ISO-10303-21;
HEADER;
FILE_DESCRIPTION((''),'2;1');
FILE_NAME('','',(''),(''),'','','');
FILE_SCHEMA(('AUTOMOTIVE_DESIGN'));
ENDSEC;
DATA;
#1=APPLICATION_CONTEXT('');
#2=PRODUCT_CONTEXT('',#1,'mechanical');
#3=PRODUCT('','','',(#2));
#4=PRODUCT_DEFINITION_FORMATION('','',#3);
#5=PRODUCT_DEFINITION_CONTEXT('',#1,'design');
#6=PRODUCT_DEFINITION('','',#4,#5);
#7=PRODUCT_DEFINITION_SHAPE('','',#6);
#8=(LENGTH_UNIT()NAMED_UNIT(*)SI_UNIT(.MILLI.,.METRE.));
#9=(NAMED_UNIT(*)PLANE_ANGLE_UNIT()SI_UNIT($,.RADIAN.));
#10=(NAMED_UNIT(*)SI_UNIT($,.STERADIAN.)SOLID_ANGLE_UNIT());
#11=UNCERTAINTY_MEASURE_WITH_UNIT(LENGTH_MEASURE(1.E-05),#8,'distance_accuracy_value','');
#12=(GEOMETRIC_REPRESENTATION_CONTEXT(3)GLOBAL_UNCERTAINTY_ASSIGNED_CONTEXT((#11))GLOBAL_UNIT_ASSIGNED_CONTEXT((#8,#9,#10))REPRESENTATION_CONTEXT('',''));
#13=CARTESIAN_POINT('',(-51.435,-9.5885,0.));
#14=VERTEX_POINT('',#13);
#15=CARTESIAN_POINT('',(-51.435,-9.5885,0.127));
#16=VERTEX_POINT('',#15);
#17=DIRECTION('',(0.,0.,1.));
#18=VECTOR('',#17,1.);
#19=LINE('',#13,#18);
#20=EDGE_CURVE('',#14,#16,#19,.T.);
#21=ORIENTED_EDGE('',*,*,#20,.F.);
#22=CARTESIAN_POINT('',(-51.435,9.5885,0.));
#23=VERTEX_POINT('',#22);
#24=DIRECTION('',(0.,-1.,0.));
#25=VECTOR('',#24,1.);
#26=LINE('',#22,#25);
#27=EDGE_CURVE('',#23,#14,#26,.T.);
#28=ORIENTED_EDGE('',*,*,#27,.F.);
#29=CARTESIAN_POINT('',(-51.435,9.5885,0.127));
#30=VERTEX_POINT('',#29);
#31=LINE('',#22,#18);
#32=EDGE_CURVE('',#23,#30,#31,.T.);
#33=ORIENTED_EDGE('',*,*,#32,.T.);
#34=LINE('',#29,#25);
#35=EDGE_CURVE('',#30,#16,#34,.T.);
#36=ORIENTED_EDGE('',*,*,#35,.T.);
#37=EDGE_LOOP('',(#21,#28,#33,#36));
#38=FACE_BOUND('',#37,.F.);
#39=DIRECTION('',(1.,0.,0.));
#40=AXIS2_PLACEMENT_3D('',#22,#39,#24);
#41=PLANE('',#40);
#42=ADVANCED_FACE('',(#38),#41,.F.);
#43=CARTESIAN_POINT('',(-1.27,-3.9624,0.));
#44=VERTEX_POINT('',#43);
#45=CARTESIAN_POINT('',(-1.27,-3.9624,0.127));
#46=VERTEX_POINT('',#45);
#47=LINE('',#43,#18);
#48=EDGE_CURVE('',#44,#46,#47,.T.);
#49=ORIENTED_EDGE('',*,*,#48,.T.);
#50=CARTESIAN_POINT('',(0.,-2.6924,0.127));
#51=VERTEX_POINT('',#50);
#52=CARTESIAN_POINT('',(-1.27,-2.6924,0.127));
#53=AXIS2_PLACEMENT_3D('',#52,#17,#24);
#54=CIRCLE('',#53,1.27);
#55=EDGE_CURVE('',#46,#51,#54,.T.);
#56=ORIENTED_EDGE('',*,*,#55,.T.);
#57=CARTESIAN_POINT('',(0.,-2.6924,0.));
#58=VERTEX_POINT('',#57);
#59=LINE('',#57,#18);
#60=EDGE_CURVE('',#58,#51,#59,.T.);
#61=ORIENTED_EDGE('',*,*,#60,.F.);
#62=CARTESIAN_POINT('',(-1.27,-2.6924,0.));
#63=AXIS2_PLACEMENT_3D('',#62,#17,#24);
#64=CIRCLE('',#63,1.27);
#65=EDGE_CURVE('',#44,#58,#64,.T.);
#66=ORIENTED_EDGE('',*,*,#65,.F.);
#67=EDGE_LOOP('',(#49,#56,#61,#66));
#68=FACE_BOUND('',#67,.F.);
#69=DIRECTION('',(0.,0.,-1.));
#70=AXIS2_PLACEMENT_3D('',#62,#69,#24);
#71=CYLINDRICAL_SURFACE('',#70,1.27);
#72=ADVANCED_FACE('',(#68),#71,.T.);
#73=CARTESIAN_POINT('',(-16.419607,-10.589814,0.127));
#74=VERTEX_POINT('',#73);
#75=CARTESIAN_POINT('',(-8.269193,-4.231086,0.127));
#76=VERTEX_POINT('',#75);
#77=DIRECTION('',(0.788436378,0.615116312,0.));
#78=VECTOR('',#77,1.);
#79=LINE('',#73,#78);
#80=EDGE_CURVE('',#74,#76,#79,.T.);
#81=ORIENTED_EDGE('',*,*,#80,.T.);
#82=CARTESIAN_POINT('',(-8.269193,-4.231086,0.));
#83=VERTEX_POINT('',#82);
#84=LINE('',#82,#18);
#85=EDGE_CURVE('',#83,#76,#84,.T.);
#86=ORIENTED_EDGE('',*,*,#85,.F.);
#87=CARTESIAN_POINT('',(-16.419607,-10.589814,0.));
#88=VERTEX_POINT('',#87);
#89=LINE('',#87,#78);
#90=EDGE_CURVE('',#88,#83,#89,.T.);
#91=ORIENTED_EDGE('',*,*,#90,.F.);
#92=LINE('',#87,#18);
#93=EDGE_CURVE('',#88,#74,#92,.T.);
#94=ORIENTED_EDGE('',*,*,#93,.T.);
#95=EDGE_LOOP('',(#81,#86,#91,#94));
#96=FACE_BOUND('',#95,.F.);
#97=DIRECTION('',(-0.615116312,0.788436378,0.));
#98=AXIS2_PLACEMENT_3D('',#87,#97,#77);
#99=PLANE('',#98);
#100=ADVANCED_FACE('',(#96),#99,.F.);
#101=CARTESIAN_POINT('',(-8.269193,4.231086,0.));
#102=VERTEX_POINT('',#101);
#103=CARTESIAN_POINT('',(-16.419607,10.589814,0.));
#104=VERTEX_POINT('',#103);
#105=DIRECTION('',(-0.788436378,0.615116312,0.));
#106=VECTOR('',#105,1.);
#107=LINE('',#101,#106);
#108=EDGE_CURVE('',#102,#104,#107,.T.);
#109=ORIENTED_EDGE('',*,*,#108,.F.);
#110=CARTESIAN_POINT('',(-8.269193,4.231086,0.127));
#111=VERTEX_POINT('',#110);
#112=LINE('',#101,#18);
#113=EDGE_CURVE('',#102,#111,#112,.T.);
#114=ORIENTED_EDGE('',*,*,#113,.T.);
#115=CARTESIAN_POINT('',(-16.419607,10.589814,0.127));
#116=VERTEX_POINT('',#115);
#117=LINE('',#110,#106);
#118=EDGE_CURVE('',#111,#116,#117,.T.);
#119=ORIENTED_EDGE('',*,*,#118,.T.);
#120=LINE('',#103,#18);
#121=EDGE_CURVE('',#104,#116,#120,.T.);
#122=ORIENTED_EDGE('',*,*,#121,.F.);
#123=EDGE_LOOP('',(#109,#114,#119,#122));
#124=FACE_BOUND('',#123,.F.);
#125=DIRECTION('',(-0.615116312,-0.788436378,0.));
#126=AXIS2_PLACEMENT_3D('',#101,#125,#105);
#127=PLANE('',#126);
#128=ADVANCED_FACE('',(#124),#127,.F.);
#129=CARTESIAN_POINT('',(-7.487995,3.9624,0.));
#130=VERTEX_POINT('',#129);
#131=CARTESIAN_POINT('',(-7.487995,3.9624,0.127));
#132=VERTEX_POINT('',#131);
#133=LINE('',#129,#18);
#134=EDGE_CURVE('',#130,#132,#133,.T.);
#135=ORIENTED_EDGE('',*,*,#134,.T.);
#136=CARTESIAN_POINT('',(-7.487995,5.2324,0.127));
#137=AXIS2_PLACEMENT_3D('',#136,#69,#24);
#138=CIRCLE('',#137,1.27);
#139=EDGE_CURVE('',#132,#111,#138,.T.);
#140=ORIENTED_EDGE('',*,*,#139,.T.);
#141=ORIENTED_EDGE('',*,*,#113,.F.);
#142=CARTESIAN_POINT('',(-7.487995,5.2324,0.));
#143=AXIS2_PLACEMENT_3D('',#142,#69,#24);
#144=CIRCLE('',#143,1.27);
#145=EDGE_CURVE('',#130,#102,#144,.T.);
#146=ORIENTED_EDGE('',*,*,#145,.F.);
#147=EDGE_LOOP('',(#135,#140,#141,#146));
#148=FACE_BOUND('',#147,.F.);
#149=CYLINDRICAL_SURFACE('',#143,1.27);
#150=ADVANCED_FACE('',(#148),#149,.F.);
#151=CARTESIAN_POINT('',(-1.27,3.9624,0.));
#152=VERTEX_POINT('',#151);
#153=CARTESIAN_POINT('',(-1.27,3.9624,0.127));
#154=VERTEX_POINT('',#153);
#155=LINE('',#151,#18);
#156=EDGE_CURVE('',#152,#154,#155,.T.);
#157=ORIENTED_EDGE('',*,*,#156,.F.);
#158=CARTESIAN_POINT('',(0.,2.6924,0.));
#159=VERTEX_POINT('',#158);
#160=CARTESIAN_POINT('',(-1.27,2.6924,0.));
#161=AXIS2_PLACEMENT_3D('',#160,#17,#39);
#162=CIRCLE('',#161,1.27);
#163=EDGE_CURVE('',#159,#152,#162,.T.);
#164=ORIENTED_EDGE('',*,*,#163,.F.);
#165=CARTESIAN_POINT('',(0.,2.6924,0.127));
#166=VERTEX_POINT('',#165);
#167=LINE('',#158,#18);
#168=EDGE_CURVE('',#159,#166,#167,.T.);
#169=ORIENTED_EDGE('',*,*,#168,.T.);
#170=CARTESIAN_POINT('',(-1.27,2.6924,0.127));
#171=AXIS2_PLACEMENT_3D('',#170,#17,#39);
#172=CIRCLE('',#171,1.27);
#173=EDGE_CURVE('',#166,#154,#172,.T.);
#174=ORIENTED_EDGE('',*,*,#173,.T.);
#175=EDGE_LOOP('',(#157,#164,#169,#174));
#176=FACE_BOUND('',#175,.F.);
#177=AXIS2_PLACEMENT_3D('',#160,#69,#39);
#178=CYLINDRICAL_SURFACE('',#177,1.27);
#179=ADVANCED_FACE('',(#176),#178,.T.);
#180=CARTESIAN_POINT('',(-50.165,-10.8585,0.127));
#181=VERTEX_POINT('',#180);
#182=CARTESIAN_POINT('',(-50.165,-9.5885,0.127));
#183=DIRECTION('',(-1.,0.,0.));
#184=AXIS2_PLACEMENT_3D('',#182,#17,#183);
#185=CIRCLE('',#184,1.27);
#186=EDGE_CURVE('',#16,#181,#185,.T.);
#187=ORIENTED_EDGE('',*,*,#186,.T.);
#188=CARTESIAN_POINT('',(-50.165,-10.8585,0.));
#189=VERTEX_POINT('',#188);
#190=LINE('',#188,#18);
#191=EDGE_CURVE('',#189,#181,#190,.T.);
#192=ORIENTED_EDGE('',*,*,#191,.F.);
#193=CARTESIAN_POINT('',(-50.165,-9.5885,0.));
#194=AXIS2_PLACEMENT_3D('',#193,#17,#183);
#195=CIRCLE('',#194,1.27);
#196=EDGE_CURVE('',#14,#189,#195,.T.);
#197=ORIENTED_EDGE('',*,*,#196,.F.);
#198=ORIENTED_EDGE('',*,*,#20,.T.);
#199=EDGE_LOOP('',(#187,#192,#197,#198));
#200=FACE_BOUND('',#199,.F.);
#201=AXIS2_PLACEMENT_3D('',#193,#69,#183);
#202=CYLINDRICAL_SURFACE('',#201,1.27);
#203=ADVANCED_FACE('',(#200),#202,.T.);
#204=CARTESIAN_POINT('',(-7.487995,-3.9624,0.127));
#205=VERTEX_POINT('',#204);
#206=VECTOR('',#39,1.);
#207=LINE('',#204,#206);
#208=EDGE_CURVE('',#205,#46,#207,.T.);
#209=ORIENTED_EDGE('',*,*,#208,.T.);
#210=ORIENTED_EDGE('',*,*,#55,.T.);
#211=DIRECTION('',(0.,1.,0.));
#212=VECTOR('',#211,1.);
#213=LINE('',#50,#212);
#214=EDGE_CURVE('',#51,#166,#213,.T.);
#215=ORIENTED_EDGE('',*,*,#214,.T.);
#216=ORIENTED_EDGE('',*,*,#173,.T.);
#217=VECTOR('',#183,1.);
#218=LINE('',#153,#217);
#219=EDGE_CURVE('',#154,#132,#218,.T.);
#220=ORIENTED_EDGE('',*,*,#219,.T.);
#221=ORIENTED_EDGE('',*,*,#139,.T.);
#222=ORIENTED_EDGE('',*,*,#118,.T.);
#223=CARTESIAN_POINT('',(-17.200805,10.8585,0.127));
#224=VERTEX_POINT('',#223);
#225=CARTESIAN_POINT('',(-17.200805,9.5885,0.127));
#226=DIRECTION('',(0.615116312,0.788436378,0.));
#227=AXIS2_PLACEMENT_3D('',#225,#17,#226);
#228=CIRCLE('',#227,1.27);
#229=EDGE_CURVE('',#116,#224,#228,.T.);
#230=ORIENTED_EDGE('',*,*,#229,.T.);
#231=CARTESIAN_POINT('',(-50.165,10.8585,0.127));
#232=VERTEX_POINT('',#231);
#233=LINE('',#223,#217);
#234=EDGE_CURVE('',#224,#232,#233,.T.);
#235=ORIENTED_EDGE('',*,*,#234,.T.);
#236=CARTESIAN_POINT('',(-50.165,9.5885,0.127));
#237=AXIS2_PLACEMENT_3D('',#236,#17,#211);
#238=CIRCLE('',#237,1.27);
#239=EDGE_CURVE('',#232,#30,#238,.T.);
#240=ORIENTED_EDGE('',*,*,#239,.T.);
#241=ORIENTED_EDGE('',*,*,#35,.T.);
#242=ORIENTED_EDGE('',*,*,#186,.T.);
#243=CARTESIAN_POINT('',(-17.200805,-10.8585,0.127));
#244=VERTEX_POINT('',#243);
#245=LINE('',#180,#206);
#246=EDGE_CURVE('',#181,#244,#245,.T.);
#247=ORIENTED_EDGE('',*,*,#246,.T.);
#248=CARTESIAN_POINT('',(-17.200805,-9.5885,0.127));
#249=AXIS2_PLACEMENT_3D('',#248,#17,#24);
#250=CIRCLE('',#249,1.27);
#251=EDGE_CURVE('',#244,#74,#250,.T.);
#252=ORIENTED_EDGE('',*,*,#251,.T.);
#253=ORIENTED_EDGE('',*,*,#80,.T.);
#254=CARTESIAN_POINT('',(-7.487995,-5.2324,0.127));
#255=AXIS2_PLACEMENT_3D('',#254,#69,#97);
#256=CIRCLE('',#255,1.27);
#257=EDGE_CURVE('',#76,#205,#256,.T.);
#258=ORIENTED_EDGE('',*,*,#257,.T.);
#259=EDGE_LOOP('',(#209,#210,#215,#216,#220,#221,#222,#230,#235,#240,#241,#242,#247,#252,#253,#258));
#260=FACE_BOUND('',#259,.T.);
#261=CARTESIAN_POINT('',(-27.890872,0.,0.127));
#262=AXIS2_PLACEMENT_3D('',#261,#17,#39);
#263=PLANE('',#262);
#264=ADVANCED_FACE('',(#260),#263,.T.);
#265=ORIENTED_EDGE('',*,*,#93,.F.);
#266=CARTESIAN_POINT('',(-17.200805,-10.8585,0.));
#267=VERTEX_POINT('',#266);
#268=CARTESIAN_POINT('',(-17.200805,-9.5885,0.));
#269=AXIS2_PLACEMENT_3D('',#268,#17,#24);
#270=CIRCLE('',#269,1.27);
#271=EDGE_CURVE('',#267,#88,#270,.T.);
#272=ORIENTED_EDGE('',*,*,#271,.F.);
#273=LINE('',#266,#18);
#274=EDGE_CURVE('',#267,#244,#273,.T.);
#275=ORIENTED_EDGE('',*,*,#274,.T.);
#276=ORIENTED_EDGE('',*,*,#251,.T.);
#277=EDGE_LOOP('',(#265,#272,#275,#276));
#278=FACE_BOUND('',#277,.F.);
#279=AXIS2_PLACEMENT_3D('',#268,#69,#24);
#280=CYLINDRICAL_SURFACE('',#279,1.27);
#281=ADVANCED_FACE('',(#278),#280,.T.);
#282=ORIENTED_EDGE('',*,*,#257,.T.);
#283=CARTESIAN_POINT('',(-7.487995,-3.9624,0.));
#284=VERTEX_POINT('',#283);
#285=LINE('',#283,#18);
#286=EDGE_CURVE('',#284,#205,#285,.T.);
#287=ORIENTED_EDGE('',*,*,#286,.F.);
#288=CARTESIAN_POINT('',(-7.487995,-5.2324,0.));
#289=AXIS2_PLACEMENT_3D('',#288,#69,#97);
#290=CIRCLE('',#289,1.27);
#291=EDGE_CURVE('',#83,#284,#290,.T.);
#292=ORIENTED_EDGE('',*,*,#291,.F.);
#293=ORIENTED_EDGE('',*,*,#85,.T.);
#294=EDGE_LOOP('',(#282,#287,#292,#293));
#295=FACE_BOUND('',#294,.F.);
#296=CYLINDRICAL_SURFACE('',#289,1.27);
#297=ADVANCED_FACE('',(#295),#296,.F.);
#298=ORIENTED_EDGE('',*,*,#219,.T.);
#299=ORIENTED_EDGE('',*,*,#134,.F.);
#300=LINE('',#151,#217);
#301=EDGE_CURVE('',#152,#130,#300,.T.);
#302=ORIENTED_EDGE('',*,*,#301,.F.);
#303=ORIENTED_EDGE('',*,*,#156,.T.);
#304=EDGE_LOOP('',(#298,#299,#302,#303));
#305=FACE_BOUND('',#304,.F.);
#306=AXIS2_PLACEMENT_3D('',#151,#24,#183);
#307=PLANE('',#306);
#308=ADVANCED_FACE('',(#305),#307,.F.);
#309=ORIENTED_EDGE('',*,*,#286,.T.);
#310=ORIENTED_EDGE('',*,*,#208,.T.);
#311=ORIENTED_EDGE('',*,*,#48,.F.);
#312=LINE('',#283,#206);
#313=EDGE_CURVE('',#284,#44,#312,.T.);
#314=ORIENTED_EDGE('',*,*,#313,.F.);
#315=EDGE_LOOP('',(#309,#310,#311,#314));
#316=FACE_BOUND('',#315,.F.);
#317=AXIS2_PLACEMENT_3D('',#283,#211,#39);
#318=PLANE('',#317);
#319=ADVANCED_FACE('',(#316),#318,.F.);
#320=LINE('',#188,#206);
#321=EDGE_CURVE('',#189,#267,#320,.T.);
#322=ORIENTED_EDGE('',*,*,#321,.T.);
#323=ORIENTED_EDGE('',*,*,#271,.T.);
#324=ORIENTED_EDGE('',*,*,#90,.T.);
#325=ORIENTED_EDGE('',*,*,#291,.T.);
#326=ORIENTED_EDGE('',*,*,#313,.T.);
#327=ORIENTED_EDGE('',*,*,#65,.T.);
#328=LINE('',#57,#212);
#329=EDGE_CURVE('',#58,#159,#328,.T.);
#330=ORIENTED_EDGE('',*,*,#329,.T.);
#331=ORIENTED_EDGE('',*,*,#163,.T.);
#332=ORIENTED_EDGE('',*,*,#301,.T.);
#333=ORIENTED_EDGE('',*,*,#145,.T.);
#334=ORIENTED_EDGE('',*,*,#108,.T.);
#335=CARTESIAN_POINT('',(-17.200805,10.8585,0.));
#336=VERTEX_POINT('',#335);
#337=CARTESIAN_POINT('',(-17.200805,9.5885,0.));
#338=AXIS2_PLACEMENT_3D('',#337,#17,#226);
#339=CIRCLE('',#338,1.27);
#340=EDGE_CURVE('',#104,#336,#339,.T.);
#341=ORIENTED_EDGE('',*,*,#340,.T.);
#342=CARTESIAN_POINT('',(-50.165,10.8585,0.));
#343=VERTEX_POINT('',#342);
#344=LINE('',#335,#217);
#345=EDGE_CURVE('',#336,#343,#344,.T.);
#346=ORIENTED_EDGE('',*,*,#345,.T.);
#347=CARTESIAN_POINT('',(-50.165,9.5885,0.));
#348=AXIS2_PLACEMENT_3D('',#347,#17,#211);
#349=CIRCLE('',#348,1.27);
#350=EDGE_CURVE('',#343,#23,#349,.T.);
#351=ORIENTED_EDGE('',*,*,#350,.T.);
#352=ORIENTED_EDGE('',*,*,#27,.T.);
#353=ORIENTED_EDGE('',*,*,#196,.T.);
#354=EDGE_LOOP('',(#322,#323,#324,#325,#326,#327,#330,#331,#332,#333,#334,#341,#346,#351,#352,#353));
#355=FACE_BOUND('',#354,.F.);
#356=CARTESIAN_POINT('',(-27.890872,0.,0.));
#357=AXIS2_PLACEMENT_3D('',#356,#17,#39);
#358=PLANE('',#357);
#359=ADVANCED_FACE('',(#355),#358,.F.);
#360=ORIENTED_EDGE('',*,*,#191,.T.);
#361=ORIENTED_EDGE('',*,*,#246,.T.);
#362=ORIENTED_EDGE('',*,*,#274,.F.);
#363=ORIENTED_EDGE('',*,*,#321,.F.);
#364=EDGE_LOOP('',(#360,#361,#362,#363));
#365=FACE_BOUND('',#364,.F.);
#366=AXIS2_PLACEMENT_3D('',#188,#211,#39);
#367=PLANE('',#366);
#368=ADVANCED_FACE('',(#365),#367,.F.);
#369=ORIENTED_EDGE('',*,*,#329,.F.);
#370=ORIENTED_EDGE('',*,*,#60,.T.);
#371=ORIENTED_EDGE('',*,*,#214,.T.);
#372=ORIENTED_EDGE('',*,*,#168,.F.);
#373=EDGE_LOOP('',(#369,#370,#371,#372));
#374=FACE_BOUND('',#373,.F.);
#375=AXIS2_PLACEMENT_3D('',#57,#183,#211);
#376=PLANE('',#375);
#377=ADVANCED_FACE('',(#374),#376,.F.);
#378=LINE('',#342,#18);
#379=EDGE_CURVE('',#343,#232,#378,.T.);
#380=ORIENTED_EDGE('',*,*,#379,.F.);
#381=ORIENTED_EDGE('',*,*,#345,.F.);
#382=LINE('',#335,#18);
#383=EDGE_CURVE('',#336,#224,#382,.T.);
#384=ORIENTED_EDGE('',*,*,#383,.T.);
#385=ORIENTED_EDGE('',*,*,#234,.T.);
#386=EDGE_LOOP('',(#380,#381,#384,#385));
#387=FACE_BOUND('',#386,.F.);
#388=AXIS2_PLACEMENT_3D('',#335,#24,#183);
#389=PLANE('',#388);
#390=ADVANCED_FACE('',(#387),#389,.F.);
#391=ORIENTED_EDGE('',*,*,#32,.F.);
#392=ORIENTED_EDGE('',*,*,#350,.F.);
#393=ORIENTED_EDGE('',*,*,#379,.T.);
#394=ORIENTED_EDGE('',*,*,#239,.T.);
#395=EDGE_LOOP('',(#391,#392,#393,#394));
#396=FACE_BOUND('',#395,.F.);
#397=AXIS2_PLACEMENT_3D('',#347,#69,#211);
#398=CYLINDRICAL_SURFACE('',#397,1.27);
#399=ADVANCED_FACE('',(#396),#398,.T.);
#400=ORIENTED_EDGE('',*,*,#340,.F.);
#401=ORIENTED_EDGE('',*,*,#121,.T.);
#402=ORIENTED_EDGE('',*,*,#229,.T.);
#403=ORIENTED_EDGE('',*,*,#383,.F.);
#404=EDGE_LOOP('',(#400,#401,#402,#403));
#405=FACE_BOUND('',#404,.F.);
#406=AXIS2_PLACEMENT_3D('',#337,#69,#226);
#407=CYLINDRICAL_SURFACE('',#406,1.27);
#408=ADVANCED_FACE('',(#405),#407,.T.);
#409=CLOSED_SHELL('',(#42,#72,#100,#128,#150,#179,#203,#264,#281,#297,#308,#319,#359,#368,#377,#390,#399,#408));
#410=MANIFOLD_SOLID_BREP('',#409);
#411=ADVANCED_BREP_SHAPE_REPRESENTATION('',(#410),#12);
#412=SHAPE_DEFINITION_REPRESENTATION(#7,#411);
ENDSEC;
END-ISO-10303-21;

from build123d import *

# Parameters (mm, degrees)
F1_DEPTH = 0.127


# Not quite as in the source:
# - the program builds the solid bodies; features that only make, move or delete a surface that nothing else refers to are left out


with BuildPart() as f1:
    # F0 (on Top) → F1 (new body)
    with BuildSketch(Plane.XY):
        with BuildLine():
            Line((0, -2.6924), (0, 0))
            Line((0, 0), (0, 2.6924))
            ThreePointArc((0, 2.6924), (-0.3719743879, 3.5904256121), (-1.27, 3.9624))
            Line((-1.27, 3.9624), (-7.4879951317, 3.9624))
            ThreePointArc((-7.4879951317, 3.9624), (-7.9010514025, 4.0314484951), (-8.2691928483, 4.2310857998))
            Line((-8.2691928483, 4.2310857998), (-16.4196071517, 10.5898142002))
            ThreePointArc((-16.4196071517, 10.5898142002), (-16.7877485975, 10.7894515049), (-17.2008048683, 10.8585))
            Line((-17.2008048683, 10.8585), (-50.165, 10.8585))
            ThreePointArc((-50.165, 10.8585), (-51.0630256121, 10.4865256121), (-51.435, 9.5885))
            Line((-51.435, 9.5885), (-51.435, 0))
            Line((-51.435, 0), (-51.435, -9.5885))
            ThreePointArc((-51.435, -9.5885), (-51.0630256121, -10.4865256121), (-50.165, -10.8585))
            Line((-50.165, -10.8585), (-17.2008048683, -10.8585))
            ThreePointArc((-17.2008048683, -10.8585), (-16.7877485975, -10.7894515049), (-16.4196071517, -10.5898142002))
            Line((-16.4196071517, -10.5898142002), (-8.2691928483, -4.2310857998))
            ThreePointArc((-8.2691928483, -4.2310857998), (-7.9010514025, -4.0314484951), (-7.4879951317, -3.9624))
            Line((-7.4879951317, -3.9624), (-1.27, -3.9624))
            ThreePointArc((-1.27, -3.9624), (-0.3719743879, -3.5904256121), (0, -2.6924))
        make_face()
    extrude(amount=F1_DEPTH)


solid = f1.part
